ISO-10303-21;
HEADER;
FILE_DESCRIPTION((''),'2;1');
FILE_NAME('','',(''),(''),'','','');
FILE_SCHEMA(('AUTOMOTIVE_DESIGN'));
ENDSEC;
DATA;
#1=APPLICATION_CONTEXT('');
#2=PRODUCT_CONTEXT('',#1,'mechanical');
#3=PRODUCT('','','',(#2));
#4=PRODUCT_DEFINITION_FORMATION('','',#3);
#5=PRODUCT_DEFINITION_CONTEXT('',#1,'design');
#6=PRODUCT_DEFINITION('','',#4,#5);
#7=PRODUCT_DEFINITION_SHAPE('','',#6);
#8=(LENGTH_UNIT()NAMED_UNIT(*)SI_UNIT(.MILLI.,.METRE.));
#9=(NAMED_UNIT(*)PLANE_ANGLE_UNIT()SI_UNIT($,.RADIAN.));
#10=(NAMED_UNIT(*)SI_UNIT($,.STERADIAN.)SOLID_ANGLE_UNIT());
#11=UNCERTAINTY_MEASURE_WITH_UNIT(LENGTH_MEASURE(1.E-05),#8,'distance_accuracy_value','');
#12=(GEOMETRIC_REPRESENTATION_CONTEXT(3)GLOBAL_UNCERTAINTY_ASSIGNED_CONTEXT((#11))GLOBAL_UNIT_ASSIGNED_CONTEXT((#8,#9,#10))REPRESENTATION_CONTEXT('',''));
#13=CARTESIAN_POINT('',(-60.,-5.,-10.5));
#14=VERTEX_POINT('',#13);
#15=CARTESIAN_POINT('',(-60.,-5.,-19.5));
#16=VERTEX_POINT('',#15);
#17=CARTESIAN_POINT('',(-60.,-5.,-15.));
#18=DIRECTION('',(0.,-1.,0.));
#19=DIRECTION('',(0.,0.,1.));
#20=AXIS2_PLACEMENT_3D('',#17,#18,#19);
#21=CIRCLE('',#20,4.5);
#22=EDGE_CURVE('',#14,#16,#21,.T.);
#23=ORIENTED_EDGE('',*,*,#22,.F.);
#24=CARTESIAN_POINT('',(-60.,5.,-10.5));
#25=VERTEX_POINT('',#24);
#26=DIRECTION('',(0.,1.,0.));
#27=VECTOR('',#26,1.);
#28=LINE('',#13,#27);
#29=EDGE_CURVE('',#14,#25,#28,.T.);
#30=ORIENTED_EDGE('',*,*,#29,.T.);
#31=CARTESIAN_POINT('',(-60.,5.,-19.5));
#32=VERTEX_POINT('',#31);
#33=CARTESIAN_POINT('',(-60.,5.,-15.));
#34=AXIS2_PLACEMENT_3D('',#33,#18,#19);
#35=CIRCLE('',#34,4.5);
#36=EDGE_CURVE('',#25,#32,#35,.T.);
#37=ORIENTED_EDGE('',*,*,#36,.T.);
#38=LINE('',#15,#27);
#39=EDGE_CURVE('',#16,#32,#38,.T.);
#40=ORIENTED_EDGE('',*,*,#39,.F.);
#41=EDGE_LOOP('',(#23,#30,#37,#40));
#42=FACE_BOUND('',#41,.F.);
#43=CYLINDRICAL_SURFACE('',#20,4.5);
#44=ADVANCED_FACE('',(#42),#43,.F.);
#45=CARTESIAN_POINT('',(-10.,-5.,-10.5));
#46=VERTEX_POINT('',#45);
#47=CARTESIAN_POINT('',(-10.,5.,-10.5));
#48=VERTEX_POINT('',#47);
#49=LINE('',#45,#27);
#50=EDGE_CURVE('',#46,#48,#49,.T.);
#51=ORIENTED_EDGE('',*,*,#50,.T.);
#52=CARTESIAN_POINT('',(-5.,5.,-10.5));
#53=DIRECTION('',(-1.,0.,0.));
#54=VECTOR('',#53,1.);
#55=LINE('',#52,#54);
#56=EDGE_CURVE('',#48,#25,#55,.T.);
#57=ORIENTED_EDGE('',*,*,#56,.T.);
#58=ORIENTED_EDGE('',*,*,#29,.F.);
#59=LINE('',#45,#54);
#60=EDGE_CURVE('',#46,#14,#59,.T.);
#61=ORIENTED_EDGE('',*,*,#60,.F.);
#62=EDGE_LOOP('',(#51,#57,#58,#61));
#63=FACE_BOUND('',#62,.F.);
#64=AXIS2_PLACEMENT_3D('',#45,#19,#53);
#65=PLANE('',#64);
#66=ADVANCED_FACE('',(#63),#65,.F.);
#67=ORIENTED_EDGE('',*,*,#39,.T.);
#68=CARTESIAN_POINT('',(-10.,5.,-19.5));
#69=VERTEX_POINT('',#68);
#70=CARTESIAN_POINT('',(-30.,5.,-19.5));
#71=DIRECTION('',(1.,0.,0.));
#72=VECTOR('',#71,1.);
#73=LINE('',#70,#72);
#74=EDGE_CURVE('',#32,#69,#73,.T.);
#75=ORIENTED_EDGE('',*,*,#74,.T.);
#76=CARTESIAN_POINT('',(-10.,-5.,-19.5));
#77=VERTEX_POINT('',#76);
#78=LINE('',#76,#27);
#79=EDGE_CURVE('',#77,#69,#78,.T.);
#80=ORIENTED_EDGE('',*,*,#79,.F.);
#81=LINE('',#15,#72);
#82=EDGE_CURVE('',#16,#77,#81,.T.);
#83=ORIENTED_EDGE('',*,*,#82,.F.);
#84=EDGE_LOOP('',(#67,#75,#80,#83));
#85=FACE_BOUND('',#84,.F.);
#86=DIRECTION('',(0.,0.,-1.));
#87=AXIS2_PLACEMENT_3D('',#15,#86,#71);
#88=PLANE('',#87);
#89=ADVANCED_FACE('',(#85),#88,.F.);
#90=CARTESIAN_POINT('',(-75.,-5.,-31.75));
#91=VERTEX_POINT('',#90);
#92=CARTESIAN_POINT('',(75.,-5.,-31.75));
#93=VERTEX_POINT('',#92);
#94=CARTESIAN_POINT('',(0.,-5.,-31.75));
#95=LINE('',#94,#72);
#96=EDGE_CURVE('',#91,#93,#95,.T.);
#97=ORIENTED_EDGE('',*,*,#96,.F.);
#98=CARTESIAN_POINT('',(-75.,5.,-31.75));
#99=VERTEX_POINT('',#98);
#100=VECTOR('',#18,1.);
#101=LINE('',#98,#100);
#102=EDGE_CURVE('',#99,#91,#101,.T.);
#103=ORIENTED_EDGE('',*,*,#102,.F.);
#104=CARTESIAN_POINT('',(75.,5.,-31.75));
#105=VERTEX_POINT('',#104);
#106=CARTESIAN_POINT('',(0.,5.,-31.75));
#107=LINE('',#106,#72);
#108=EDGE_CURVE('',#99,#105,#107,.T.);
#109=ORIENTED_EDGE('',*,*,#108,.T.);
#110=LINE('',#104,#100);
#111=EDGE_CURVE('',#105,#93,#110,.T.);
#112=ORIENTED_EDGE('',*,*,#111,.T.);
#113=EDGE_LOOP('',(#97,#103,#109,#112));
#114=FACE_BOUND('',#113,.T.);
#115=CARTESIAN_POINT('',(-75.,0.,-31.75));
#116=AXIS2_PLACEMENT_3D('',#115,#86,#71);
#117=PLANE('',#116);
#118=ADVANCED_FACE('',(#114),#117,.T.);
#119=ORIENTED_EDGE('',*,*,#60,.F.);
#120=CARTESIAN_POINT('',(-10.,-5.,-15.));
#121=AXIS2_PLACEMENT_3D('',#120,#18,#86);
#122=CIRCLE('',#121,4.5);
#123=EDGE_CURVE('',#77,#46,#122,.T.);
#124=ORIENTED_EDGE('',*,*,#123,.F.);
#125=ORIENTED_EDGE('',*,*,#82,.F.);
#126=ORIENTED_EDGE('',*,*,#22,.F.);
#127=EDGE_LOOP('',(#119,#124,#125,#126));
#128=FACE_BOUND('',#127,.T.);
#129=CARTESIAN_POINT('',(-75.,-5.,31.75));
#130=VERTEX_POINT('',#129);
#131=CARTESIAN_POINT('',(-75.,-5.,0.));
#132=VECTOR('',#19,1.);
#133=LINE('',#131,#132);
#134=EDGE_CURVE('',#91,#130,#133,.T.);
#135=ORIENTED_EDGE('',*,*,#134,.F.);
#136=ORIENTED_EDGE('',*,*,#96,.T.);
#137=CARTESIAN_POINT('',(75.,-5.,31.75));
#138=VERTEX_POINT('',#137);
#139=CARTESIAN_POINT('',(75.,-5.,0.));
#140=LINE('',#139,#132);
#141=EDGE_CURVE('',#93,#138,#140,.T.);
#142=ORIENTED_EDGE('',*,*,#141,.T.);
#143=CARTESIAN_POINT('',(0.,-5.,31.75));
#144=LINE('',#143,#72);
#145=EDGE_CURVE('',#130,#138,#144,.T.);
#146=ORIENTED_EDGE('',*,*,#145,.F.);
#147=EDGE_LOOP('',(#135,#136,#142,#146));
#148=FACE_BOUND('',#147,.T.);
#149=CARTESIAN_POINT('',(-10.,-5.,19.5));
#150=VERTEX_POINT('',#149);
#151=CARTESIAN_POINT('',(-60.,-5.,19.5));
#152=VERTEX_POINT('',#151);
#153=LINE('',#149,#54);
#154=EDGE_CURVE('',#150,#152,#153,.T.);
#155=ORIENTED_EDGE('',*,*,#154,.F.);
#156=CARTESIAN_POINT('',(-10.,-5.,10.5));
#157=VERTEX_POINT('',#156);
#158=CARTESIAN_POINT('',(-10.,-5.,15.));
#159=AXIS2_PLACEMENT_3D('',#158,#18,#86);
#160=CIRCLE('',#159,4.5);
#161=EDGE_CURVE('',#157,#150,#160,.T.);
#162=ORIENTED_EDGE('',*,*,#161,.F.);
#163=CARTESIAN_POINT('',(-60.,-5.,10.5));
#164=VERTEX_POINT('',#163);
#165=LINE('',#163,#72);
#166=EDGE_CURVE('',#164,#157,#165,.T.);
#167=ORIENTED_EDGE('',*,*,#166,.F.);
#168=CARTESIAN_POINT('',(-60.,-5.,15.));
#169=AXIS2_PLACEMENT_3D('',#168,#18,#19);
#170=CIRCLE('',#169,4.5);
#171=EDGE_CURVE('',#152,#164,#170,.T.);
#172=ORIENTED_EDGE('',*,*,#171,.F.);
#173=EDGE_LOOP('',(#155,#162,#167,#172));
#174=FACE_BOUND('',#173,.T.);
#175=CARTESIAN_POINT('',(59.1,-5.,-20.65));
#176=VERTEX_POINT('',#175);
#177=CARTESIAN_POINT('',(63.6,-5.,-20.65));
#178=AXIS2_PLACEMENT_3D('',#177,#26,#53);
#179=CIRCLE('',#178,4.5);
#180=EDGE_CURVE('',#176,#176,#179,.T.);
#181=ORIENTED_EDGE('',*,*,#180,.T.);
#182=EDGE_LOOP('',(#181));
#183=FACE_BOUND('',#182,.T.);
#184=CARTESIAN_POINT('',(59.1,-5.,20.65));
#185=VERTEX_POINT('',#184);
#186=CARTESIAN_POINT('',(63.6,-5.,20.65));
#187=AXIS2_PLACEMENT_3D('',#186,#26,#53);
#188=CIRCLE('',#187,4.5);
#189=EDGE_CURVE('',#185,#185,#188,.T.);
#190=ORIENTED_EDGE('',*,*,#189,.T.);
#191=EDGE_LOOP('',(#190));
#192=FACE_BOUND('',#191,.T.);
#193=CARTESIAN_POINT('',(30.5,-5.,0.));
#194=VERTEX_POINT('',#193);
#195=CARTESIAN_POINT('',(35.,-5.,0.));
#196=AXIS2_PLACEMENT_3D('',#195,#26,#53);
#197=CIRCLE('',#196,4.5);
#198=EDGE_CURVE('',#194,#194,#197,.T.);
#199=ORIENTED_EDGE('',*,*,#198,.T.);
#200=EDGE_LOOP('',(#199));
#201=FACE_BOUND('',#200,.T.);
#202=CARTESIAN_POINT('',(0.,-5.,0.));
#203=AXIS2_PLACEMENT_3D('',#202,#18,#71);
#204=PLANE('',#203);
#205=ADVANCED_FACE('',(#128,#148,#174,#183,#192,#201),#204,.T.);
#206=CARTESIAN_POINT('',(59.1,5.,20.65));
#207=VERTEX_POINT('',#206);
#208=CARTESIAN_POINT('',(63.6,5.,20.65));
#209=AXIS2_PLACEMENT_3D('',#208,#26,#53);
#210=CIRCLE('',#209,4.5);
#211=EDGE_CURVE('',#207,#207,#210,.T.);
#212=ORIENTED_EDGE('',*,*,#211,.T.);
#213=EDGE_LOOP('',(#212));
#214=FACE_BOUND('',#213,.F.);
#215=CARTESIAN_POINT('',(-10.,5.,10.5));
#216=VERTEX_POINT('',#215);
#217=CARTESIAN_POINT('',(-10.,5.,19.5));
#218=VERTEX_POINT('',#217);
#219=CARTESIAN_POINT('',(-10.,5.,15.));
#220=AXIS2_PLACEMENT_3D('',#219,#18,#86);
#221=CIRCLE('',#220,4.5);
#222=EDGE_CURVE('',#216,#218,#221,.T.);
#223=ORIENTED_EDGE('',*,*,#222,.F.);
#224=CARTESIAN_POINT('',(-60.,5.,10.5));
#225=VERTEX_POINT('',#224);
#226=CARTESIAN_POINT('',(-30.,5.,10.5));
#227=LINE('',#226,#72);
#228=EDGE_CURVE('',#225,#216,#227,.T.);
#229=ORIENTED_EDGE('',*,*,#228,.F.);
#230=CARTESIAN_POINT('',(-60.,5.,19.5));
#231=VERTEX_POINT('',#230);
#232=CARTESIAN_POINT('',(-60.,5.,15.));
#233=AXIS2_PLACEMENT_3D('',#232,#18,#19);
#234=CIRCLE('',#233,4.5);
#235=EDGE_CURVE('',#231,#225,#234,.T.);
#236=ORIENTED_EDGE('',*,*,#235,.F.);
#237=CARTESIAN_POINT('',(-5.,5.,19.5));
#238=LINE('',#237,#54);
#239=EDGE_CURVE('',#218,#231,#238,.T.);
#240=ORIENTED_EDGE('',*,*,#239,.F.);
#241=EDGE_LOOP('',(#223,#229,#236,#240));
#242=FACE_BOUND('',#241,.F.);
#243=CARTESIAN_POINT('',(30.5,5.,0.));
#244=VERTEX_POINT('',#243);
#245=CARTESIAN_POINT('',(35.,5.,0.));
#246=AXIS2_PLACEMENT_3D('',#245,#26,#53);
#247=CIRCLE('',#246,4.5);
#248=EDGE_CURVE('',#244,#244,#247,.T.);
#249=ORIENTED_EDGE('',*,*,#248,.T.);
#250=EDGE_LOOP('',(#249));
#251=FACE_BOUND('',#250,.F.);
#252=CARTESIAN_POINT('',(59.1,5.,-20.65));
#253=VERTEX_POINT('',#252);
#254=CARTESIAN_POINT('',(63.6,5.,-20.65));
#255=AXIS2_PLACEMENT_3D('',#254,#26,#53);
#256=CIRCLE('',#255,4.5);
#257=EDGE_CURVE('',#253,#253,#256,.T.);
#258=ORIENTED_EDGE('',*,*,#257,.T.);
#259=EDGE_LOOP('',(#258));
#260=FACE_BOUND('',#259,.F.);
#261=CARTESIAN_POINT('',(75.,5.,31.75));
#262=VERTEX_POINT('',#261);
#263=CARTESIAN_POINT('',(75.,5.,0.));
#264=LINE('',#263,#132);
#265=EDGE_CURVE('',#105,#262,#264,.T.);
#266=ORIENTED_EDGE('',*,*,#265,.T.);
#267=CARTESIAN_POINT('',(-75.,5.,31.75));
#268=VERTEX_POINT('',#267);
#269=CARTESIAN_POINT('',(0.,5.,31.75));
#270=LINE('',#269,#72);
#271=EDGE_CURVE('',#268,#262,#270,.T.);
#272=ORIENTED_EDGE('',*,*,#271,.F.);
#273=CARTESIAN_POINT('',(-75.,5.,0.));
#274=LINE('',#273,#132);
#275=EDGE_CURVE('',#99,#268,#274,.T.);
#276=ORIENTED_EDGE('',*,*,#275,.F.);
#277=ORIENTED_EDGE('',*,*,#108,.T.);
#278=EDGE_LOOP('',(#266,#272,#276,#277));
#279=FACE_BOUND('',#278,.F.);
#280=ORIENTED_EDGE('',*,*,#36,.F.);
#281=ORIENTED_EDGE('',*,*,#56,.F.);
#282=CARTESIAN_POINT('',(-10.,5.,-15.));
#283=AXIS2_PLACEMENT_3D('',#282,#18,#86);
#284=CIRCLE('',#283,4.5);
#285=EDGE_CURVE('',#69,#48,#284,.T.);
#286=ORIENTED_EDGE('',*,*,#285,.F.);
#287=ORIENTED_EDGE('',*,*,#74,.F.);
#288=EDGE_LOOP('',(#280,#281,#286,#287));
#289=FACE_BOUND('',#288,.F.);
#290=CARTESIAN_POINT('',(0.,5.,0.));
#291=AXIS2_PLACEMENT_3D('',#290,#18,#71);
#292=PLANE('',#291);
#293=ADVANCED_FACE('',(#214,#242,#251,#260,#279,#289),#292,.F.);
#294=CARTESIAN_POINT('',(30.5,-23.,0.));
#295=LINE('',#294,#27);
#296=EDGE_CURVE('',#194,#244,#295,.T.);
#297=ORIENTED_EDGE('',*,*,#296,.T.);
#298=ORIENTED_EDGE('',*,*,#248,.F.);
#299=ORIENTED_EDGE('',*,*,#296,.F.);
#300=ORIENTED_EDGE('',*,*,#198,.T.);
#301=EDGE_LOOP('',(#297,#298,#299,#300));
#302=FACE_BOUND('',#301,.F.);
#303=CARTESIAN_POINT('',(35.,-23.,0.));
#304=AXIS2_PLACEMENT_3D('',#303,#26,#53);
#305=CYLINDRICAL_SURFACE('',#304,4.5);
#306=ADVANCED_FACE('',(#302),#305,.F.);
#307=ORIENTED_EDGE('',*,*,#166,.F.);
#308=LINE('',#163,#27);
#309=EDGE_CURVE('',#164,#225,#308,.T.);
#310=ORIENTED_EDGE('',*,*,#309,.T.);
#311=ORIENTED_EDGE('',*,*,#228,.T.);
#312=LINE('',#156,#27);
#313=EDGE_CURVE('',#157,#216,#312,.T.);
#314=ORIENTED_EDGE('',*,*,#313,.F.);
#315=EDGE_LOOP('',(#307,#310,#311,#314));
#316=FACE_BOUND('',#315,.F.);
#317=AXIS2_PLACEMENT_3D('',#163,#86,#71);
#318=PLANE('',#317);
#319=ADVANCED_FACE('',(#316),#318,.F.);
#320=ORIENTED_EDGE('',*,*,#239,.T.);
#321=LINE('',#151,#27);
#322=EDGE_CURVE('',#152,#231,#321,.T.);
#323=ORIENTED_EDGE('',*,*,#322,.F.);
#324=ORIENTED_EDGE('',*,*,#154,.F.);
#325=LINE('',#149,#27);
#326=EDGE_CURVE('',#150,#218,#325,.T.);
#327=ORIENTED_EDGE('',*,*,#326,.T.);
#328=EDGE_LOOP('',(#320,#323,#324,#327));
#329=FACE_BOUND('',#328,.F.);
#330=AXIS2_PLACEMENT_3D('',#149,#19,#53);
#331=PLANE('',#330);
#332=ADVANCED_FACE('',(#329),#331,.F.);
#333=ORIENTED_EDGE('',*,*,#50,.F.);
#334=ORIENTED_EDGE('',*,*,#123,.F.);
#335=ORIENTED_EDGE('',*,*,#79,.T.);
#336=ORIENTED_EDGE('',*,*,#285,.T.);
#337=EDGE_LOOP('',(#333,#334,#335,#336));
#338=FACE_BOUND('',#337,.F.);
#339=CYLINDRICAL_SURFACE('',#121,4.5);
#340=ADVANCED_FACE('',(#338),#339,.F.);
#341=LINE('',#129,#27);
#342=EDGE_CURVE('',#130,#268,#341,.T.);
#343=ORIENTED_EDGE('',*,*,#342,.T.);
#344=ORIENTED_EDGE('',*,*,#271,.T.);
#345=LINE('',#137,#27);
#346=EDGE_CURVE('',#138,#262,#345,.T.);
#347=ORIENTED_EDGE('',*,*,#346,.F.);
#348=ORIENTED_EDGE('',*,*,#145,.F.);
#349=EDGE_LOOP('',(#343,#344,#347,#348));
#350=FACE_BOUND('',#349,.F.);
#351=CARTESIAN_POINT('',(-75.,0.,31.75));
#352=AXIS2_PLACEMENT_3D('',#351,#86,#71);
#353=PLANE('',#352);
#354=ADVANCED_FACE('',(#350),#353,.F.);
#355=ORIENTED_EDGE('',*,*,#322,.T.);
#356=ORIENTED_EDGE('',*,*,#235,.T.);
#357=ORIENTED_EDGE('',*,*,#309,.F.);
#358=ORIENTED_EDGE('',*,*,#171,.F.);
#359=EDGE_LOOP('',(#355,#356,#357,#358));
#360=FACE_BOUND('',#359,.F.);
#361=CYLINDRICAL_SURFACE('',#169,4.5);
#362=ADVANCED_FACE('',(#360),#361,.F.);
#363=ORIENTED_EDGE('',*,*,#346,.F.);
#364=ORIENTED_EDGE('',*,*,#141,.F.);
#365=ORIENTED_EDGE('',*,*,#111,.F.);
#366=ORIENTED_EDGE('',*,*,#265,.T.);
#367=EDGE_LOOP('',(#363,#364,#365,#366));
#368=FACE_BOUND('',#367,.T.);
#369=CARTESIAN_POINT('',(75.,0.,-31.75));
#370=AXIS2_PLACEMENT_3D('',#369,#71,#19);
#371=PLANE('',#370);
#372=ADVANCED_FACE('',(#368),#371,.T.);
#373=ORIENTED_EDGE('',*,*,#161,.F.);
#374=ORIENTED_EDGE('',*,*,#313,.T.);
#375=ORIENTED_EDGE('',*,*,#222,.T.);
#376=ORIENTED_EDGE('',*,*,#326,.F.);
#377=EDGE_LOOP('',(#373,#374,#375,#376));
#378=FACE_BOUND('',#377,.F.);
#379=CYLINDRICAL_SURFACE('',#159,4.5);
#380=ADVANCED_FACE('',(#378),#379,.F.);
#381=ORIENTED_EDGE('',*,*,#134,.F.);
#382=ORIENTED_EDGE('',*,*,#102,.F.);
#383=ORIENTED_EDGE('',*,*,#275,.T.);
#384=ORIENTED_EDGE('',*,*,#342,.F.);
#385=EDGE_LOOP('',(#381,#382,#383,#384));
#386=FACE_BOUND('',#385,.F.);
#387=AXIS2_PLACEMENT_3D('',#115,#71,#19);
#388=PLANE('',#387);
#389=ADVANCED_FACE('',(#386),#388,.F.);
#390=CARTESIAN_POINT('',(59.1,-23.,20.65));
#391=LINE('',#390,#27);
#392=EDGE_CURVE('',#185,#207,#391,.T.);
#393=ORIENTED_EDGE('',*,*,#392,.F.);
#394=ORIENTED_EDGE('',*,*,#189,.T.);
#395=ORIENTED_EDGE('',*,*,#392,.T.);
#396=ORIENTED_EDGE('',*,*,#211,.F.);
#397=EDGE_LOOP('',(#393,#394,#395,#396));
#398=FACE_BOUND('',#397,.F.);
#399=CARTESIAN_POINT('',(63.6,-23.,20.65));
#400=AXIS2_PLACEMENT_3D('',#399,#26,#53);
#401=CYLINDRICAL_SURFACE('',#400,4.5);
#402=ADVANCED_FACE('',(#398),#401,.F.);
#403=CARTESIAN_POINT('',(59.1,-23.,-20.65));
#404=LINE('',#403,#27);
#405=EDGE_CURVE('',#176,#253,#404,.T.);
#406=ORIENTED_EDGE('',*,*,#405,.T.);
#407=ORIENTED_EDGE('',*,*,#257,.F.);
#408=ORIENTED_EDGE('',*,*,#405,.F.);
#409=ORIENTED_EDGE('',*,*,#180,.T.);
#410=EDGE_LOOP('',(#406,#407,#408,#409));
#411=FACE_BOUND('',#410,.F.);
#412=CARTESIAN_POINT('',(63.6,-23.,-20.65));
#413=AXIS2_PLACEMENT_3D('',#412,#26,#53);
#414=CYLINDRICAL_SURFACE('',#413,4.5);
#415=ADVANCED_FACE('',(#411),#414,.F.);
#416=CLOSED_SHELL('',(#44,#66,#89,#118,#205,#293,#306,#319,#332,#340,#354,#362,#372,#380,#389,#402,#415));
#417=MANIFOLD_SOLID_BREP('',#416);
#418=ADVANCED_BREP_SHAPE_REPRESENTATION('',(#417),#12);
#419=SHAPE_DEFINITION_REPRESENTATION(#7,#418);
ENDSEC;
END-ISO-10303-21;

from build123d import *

# Parameters (mm, degrees)
F0_W     = 150
F0_H     = 63.5
F1_DEPTH = 5
F3_DEPTH = 10.001
F5_D     = 9
F5_DEPTH = 18
F5_TIP   = 2.7038727856


with BuildPart() as f1:
    # F0 (on Front) → F1 (new body, symmetric)
    with BuildSketch(Plane.XZ):
        Rectangle(F0_W, F0_H)
    extrude(amount=F1_DEPTH, both=True)

    # F2 (on face) → F3 (cut, through all)
    with BuildSketch(Plane.XZ.offset(5)):
        with BuildLine():
            ThreePointArc((-60, 19.5), (-64.5, 15), (-60, 10.5))
            Line((-60, 10.5), (-10, 10.5))
            ThreePointArc((-10, 10.5), (-5.5, 15), (-10, 19.5))
            Line((-10, 19.5), (-60, 19.5))
        make_face()
        with BuildLine():
            ThreePointArc((-60, -10.5), (-64.5, -15), (-60, -19.5))
            Line((-60, -19.5), (-10, -19.5))
            ThreePointArc((-10, -19.5), (-5.5, -15), (-10, -10.5))
            Line((-10, -10.5), (-60, -10.5))
        make_face()
    extrude(amount=-F3_DEPTH, mode=Mode.SUBTRACT)

    # F5
    with Locations(Plane.XZ.offset(5)):
        with Locations((35, 0), (63.6, 20.65), (63.6, -20.65)):
            Hole(F5_D / 2, depth=F5_DEPTH)
            with Locations((0, 0, -(F5_DEPTH + F5_TIP / 2))):  # 118° drill point
                Cone(0, F5_D / 2, F5_TIP, mode=Mode.SUBTRACT)


solid = f1.part
